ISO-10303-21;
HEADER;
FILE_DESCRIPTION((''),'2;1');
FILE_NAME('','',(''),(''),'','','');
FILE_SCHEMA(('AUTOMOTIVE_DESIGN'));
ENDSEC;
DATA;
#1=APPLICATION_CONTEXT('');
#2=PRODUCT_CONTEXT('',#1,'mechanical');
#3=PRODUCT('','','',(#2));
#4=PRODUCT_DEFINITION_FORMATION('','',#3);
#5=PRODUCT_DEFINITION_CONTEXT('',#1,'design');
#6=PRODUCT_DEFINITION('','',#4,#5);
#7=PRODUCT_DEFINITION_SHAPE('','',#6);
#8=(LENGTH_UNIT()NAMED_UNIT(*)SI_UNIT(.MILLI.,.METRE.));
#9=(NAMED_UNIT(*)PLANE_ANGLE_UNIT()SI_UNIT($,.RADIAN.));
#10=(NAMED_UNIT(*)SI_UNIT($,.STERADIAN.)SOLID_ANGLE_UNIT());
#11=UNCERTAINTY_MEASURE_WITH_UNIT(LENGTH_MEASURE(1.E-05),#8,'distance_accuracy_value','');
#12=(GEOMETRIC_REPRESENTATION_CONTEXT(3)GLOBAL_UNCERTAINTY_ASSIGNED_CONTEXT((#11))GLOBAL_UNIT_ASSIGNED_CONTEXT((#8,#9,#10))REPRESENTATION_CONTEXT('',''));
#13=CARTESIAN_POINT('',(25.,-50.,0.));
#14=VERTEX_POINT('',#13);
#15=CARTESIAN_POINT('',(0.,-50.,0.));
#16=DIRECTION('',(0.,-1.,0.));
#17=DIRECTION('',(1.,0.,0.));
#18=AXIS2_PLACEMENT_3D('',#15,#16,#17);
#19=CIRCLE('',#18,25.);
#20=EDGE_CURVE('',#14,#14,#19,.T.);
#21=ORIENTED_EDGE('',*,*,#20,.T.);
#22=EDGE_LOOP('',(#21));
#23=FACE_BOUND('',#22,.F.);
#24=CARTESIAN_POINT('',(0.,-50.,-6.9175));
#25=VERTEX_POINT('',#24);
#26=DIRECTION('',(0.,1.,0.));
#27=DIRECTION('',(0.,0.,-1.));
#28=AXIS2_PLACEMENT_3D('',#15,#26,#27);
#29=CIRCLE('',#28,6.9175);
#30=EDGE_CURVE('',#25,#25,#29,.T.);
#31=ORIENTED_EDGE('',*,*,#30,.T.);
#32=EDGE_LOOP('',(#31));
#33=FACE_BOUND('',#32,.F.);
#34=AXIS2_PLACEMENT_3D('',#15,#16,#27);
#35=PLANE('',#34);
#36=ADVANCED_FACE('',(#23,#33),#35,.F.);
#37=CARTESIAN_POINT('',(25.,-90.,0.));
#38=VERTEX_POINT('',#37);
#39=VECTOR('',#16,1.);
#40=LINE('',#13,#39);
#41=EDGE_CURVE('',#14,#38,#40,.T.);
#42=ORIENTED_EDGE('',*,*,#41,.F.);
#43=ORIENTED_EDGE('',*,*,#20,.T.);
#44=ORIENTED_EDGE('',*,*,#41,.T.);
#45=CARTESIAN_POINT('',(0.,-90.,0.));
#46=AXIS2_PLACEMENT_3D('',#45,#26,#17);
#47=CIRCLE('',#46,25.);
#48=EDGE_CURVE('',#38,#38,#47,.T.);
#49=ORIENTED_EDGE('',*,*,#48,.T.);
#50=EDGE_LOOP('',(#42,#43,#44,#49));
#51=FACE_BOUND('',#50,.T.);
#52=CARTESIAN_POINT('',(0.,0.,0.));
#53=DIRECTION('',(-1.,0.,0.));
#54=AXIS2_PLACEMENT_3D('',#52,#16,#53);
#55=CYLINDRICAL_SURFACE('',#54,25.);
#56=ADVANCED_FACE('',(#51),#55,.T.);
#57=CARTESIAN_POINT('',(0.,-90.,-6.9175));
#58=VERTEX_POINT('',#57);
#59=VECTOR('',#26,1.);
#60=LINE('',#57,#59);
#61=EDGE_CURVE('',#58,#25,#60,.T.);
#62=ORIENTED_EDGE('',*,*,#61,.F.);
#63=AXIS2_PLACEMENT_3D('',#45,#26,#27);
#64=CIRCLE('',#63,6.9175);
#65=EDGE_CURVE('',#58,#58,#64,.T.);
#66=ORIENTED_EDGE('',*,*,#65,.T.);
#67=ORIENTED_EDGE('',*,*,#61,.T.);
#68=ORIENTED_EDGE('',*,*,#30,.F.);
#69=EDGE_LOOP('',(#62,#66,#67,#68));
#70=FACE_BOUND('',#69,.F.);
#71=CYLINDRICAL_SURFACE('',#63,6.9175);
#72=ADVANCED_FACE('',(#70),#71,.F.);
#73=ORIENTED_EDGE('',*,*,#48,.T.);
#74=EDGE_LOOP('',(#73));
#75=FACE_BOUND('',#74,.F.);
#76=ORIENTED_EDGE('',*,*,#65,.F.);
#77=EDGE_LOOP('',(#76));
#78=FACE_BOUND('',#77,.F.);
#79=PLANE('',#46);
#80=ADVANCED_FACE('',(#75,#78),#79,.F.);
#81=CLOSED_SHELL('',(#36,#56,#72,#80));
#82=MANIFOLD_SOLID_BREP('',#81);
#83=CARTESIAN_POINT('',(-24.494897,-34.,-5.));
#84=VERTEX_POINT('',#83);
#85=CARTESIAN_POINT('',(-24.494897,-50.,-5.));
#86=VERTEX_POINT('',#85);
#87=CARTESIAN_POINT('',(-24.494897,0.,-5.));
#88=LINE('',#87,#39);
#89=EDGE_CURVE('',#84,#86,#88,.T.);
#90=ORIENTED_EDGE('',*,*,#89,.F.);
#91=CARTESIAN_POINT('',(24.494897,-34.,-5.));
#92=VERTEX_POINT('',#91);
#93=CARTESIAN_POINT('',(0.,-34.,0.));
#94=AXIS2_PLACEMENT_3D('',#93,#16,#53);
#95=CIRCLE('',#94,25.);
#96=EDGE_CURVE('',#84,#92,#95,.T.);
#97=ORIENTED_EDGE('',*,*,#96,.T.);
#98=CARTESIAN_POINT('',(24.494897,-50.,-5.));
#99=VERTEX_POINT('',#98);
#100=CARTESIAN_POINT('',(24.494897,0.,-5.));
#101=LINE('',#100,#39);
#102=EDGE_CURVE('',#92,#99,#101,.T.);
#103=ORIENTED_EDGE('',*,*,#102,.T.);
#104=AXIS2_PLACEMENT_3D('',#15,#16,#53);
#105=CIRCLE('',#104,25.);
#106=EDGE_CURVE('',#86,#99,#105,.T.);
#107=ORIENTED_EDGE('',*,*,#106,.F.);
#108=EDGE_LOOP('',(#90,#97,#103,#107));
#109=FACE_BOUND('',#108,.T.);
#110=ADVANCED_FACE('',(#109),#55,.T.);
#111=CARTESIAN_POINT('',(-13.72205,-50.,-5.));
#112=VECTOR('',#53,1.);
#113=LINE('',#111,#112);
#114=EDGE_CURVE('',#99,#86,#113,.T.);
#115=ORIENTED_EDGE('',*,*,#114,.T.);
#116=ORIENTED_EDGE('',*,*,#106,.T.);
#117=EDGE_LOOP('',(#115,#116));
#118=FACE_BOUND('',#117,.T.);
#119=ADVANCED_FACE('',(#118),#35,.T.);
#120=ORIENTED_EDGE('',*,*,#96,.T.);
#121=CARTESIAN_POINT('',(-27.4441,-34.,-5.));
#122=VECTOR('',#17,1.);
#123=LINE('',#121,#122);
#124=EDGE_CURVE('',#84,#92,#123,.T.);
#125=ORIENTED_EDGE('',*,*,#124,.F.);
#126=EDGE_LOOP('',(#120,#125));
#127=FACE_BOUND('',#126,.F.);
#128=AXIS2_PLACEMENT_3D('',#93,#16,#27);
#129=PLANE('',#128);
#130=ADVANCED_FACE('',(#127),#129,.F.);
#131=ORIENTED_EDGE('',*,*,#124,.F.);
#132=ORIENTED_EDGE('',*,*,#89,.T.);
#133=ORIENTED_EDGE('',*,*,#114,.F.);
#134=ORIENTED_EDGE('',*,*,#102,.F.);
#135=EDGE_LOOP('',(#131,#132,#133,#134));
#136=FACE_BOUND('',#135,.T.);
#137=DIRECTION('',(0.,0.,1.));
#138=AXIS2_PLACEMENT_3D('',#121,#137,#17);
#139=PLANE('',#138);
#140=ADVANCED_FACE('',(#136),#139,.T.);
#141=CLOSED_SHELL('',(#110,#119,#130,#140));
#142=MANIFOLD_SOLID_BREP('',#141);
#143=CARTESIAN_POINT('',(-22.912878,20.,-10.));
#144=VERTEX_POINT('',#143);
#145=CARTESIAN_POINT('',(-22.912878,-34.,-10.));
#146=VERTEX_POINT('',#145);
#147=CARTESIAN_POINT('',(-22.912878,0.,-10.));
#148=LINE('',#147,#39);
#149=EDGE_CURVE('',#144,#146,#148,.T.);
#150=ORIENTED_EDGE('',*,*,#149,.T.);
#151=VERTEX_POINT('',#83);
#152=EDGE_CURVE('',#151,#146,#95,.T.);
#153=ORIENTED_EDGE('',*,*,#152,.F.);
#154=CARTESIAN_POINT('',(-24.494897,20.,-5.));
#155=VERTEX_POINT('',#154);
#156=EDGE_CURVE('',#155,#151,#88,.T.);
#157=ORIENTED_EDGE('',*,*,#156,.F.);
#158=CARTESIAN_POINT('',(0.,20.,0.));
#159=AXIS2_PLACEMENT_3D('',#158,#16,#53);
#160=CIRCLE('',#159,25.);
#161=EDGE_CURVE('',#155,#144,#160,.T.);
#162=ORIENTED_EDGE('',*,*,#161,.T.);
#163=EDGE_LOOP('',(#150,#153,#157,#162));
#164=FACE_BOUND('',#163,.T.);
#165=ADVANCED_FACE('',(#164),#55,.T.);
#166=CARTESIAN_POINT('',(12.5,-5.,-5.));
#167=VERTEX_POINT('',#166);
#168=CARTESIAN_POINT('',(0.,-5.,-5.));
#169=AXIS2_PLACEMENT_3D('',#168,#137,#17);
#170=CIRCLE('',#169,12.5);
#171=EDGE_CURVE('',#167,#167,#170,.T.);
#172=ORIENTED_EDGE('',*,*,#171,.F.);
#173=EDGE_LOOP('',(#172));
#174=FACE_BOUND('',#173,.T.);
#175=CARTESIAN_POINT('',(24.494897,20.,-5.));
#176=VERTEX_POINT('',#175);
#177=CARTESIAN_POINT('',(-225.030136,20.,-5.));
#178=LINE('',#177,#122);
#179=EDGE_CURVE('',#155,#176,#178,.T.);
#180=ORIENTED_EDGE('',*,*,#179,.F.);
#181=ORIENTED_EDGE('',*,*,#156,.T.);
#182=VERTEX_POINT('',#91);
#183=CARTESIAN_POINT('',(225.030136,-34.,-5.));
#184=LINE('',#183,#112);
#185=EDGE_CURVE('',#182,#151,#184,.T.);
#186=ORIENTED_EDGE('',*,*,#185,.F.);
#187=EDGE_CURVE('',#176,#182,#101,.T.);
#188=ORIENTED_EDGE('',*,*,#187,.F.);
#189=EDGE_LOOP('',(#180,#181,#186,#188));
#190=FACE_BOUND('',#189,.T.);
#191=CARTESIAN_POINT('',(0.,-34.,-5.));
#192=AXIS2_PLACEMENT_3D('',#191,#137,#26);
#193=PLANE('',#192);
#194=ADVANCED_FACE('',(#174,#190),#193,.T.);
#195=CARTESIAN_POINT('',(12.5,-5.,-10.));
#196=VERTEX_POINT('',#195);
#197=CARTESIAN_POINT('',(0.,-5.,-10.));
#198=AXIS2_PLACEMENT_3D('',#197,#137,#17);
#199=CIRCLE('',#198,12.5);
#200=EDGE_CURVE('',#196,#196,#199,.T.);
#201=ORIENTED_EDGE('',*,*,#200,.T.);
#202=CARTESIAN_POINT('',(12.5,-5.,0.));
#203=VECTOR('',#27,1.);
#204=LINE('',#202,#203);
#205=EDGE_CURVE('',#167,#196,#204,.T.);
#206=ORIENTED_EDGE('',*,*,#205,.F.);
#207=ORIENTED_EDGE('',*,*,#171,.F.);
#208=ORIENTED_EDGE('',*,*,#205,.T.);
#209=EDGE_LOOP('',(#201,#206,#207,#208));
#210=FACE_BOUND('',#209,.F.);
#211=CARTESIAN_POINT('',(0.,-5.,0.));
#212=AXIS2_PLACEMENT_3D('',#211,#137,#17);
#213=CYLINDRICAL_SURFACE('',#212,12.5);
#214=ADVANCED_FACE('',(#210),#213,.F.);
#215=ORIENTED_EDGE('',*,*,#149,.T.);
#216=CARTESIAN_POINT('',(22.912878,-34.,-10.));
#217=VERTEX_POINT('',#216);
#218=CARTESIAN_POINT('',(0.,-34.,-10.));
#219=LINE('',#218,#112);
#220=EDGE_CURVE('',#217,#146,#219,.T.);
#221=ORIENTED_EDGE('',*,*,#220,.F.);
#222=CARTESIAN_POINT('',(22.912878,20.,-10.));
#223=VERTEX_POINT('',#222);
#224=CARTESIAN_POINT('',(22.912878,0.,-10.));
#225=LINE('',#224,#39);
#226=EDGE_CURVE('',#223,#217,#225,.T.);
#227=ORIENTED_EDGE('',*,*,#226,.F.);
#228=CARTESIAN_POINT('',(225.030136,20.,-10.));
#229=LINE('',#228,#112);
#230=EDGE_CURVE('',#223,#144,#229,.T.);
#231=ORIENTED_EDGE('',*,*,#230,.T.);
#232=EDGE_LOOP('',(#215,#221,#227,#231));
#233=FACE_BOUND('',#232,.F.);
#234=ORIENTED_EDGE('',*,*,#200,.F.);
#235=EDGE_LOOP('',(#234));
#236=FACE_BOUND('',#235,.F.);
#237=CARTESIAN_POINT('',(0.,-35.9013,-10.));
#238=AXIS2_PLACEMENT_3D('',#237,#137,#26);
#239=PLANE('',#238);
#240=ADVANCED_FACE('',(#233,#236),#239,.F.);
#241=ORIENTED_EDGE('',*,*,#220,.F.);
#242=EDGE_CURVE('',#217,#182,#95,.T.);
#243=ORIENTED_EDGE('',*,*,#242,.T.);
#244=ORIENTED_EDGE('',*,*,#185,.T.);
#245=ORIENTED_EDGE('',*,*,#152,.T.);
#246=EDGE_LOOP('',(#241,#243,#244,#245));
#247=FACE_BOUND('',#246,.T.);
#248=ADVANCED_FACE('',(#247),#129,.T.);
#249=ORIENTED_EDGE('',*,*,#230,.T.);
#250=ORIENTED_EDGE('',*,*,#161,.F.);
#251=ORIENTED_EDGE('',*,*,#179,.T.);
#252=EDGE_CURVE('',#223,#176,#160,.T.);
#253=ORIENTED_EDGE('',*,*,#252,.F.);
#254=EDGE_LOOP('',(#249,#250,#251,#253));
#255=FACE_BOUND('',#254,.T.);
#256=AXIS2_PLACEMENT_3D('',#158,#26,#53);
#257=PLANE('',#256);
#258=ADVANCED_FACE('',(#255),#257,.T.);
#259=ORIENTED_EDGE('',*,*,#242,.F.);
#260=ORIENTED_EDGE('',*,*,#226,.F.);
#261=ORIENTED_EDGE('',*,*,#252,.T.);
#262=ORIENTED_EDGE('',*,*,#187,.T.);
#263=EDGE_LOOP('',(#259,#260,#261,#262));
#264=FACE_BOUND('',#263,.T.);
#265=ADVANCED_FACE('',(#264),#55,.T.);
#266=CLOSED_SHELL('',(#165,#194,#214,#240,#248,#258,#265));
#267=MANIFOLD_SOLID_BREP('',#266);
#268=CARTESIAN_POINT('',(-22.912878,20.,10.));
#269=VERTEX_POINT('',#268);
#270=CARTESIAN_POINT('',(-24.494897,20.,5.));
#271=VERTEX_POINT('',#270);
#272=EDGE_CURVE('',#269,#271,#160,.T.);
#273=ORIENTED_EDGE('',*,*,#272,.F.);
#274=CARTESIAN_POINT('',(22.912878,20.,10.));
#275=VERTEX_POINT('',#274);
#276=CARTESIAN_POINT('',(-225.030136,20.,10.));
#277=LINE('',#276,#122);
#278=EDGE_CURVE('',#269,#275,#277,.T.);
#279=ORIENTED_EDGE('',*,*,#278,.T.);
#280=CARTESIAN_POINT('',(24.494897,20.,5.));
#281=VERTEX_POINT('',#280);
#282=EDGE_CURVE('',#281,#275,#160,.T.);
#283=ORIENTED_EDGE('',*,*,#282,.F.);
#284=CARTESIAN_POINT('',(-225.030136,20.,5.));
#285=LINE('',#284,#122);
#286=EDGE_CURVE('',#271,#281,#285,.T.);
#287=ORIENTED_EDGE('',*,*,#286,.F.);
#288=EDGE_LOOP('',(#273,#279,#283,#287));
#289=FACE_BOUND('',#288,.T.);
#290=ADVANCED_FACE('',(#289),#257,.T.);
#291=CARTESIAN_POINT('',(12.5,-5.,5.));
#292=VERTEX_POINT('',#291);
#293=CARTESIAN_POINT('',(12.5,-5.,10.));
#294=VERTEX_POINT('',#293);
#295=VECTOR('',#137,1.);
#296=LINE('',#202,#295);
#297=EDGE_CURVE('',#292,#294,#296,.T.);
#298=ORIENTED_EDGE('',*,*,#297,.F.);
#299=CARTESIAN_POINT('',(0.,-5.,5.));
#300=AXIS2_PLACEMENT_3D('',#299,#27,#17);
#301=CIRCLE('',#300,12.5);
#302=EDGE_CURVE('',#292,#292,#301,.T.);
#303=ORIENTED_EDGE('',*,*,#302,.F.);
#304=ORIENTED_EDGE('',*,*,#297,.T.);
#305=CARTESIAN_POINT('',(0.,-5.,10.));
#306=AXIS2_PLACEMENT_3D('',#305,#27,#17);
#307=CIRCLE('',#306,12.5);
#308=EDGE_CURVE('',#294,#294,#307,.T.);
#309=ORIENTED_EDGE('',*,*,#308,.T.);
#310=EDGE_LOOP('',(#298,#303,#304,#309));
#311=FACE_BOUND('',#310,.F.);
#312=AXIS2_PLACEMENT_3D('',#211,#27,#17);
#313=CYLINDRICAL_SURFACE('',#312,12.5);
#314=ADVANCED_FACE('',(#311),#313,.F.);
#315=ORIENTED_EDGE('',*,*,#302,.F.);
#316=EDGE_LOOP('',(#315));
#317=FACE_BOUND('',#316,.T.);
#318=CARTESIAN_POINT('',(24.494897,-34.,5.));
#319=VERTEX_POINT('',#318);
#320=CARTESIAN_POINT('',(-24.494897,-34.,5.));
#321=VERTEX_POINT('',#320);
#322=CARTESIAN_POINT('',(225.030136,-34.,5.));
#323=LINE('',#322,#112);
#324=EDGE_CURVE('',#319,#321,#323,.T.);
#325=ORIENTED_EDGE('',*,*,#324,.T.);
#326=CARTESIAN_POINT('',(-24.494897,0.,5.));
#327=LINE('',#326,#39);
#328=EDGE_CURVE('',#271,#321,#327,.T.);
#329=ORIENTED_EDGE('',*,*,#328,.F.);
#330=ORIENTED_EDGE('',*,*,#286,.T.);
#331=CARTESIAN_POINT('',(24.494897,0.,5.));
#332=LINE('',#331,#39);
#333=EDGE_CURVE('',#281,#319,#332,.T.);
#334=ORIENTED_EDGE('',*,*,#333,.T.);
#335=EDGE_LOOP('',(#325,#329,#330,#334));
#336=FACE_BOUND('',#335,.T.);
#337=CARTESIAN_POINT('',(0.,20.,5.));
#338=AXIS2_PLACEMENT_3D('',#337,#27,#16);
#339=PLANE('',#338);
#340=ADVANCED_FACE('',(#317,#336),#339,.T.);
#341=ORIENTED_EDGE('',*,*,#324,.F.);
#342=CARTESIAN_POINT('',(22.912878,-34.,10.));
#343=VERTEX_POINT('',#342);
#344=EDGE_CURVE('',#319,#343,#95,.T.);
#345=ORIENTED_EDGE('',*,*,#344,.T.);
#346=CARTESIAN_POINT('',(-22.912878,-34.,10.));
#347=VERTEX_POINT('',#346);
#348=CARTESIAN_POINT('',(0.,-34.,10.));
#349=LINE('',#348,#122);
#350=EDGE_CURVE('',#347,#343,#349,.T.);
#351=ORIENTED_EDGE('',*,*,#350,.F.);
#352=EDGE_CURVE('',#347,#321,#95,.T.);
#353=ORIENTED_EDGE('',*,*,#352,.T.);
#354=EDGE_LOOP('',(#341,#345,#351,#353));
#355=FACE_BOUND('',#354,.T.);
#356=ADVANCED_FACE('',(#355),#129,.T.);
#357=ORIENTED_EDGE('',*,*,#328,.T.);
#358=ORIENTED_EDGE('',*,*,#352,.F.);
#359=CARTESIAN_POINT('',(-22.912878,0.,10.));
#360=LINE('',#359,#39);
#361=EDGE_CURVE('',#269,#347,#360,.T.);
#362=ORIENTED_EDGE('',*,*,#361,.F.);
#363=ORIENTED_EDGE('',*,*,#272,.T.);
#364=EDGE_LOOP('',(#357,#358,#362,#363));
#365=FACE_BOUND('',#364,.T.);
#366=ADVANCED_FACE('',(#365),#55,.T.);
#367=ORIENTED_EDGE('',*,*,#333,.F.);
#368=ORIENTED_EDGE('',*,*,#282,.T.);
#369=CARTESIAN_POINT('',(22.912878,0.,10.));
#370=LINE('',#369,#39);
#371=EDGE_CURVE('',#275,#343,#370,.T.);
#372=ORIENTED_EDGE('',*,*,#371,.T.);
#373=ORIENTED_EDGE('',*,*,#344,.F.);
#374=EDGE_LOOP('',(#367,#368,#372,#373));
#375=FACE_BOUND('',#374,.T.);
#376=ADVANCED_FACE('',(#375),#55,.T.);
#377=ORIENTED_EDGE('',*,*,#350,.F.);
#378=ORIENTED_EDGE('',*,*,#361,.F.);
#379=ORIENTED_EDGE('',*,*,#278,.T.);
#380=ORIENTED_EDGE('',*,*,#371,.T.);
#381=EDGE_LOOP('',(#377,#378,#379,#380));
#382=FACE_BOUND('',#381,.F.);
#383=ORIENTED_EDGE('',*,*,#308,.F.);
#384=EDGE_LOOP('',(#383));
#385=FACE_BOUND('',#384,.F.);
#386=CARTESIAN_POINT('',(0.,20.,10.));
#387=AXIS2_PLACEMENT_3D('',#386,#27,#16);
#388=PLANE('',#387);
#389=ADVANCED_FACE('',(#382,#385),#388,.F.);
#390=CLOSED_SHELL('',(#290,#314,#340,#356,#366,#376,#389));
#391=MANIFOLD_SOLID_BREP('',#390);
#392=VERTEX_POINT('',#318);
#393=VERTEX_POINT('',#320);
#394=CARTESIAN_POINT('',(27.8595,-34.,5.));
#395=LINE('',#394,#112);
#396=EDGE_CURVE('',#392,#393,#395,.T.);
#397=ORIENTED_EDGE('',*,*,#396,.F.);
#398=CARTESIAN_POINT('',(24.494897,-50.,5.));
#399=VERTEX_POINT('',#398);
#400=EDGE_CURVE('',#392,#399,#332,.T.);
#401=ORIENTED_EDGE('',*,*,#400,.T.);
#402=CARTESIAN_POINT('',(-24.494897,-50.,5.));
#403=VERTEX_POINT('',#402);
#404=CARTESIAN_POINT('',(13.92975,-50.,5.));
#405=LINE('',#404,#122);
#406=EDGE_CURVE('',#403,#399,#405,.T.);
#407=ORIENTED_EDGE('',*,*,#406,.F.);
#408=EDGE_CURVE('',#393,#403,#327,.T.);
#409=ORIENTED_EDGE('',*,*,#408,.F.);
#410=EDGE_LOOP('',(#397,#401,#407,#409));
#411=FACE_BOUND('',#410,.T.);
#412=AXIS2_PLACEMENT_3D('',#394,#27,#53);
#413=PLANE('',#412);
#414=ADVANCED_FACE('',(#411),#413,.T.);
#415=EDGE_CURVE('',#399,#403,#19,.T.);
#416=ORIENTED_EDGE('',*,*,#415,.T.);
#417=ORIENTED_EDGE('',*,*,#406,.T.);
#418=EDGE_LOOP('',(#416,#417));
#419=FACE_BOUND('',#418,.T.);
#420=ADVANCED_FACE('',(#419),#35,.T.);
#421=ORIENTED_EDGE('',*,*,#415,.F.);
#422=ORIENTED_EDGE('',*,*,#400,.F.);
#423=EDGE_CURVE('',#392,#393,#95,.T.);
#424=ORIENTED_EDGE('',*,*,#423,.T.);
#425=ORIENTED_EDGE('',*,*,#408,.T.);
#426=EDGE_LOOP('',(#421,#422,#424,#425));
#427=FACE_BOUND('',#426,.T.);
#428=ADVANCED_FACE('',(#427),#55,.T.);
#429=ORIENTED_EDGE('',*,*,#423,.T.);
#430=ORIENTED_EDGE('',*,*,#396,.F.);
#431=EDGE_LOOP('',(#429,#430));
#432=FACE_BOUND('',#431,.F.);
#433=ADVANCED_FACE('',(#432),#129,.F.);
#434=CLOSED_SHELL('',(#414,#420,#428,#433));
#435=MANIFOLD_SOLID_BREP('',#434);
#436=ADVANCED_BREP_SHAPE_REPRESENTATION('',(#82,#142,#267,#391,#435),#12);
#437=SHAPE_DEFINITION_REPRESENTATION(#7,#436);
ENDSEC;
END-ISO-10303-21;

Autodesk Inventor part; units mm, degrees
ref_plane "YZ Plane" through (0, 0, 0) normal (1, 0, 0) x (0, 1, 0)
ref_plane "XZ Plane" through (0, 0, 0) normal (0, 1, 0) x (-1, 0, 0)
ref_plane "XY Plane" through (0, 0, 0) normal (0, 0, 1) x (1, 0, 0)
sketch "Szkic2" plane through (0, 0, 0) normal (0, 1, 0) x (-1, 0, 0)
  circle A0 centre (0, 0) radius 25
  line L0 (0, 0) -> (-25, 0)
  line L1 (0, 0) -> (25, 0)
extrude "Wyciągnięcie proste1" add sketch "Szkic2" along normal blind 20 and the other way blind 50
sketch "Szkic3" plane through (0, 20, 0) normal (0, 1, 0) x (1, 0, 0)
  circle A0 centre (0, 0) radius 25 projected
  line L0 (0, 0) -> (0, -25)
ref_plane "Płaszczyzna konstrukcyjna2" through (0, 20, 0) normal (0, 0, 1) x (1, 0, 0)
sketch "Szkic4" plane through (0, 20, 0) normal (0, 0, 1) x (1, 0, 0)
  circle A0 centre (0, -25) radius 12.5
  point P0 (0, -20)
  dimension "d6" = 25
extrude "Wyciągnięcie proste2" cut sketch "Szkic4" along normal through all both and the other way through all
sketch "Szkic5" plane through (0, 20, 0) normal (0, 0, 1) x (1, 0, 0)
  point P0 (0, -20)
sketch "Szkic6" plane through (0, 20, 0) normal (0, 1, 0) x (1, 0, 0)
  line L0 (0, 0) -> (24.7645, 0) construction
ref_plane "Płaszczyzna konstrukcyjna3" through (0, 20, 0) normal (1, 0, 0) x (0, 1, 0)
ref_plane "Płaszczyzna konstrukcyjna4" through (0, -34, 0) normal (0, -1, 0) x (1, 0, 0)
split body "Podział3" result two bodies by plane through (0, -34, 0) normal (0, -1, 0) first body at (-24.1827, -39.3333, 3.9301)
sketch "Szkic9" plane through (0, 20, 0) normal (0, 1, 0) x (1, 0, 0)
  point P0 (0, 0)
sketch "Szkic10" plane through (0, 20, 0) normal (1, 0, 0) x (0, 1, 0)
  line L0 (0, -25) -> (0, 25) projected
  line L1 (-54, -25) -> (-54, 25) projected
  line L2 (0, 5) -> (-54, 5)
  line L3 (-54, 5) -> (-54, -5)
  line L4 (-54, -5) -> (0, -5)
  line L5 (0, -5) -> (0, 5)
  point P0 (-20, 0)
  dimension "d13" = 10
extrude "Wyciągnięcie proste3" cut sketch "Szkic10" along normal through all both and the other way through all bodies 3
sketch "Szkic11" plane through (0, 20, 0) normal (1, 0, 0) x (0, 1, 0)
  line L0 (0, 10) -> (-55.9013, 10)
  line L1 (-55.9013, 10) -> (-55.9013, -10)
  line L2 (-55.9013, -10) -> (0, -10)
  line L3 (0, -10) -> (0, 10)
  point P0 (-20, 0)
extrude "Wyciągnięcie proste4" cut sketch "Szkic11" along normal through all both and the other way through all keep common part bodies 3
ref_plane "Płaszczyzna konstrukcyjna5" through (0, -50, 0) normal (0, -1, 0) x (1, 0, 0)
extrude "Wyciągnięcie proste5" add sketch "Szkic3" against normal blind 40 from surface at -70 bodies 2
split body "Podział4" result two bodies by plane through (0, -50, 0) normal (0, -1, 0) bodies 2 first body at (24.4206, -76.6667, 1.9714)
ref_plane "Płaszczyzna konstrukcyjna6" through (-24.4949, 20, 0) normal (0, 0, 1) x (1, 0, 0)
sketch "Szkic13" plane through (0, -50, 0) normal (0, 1, 0) x (1, 0, 0)
  point P0 (0, 0)
sketch "Szkic15" plane through (0, -90, 0) normal (0, -1, 0) x (1, 0, 0)
  point P0 (0, 0)
  point P1 (0, 0)
hole "Otwór1" at (0, -90, 0) at (0, -90, 0) direction (0, 1, 0) diameter 13.835 depth 41.3 tip angle 118 bodies 4 thread size "M16x2" class "6H" standard "ISO Metric profile"
sketch "Szkic16" plane through (0, -34, 0) normal (0, 1, 0) x (1, 0, 0)
  line L0 (-27.4441, 5) -> (27.8595, 5)
  line L1 (27.8595, 5) -> (27.8595, -5)
  line L2 (27.8595, -5) -> (-27.4441, -5)
  line L3 (-27.4441, -5) -> (-27.4441, 5)
  point P0 (0, 0)
extrude "Wyciągnięcie proste8" cut sketch "Szkic16" against normal blind 20 bodies 5
properties part number "przegub"
